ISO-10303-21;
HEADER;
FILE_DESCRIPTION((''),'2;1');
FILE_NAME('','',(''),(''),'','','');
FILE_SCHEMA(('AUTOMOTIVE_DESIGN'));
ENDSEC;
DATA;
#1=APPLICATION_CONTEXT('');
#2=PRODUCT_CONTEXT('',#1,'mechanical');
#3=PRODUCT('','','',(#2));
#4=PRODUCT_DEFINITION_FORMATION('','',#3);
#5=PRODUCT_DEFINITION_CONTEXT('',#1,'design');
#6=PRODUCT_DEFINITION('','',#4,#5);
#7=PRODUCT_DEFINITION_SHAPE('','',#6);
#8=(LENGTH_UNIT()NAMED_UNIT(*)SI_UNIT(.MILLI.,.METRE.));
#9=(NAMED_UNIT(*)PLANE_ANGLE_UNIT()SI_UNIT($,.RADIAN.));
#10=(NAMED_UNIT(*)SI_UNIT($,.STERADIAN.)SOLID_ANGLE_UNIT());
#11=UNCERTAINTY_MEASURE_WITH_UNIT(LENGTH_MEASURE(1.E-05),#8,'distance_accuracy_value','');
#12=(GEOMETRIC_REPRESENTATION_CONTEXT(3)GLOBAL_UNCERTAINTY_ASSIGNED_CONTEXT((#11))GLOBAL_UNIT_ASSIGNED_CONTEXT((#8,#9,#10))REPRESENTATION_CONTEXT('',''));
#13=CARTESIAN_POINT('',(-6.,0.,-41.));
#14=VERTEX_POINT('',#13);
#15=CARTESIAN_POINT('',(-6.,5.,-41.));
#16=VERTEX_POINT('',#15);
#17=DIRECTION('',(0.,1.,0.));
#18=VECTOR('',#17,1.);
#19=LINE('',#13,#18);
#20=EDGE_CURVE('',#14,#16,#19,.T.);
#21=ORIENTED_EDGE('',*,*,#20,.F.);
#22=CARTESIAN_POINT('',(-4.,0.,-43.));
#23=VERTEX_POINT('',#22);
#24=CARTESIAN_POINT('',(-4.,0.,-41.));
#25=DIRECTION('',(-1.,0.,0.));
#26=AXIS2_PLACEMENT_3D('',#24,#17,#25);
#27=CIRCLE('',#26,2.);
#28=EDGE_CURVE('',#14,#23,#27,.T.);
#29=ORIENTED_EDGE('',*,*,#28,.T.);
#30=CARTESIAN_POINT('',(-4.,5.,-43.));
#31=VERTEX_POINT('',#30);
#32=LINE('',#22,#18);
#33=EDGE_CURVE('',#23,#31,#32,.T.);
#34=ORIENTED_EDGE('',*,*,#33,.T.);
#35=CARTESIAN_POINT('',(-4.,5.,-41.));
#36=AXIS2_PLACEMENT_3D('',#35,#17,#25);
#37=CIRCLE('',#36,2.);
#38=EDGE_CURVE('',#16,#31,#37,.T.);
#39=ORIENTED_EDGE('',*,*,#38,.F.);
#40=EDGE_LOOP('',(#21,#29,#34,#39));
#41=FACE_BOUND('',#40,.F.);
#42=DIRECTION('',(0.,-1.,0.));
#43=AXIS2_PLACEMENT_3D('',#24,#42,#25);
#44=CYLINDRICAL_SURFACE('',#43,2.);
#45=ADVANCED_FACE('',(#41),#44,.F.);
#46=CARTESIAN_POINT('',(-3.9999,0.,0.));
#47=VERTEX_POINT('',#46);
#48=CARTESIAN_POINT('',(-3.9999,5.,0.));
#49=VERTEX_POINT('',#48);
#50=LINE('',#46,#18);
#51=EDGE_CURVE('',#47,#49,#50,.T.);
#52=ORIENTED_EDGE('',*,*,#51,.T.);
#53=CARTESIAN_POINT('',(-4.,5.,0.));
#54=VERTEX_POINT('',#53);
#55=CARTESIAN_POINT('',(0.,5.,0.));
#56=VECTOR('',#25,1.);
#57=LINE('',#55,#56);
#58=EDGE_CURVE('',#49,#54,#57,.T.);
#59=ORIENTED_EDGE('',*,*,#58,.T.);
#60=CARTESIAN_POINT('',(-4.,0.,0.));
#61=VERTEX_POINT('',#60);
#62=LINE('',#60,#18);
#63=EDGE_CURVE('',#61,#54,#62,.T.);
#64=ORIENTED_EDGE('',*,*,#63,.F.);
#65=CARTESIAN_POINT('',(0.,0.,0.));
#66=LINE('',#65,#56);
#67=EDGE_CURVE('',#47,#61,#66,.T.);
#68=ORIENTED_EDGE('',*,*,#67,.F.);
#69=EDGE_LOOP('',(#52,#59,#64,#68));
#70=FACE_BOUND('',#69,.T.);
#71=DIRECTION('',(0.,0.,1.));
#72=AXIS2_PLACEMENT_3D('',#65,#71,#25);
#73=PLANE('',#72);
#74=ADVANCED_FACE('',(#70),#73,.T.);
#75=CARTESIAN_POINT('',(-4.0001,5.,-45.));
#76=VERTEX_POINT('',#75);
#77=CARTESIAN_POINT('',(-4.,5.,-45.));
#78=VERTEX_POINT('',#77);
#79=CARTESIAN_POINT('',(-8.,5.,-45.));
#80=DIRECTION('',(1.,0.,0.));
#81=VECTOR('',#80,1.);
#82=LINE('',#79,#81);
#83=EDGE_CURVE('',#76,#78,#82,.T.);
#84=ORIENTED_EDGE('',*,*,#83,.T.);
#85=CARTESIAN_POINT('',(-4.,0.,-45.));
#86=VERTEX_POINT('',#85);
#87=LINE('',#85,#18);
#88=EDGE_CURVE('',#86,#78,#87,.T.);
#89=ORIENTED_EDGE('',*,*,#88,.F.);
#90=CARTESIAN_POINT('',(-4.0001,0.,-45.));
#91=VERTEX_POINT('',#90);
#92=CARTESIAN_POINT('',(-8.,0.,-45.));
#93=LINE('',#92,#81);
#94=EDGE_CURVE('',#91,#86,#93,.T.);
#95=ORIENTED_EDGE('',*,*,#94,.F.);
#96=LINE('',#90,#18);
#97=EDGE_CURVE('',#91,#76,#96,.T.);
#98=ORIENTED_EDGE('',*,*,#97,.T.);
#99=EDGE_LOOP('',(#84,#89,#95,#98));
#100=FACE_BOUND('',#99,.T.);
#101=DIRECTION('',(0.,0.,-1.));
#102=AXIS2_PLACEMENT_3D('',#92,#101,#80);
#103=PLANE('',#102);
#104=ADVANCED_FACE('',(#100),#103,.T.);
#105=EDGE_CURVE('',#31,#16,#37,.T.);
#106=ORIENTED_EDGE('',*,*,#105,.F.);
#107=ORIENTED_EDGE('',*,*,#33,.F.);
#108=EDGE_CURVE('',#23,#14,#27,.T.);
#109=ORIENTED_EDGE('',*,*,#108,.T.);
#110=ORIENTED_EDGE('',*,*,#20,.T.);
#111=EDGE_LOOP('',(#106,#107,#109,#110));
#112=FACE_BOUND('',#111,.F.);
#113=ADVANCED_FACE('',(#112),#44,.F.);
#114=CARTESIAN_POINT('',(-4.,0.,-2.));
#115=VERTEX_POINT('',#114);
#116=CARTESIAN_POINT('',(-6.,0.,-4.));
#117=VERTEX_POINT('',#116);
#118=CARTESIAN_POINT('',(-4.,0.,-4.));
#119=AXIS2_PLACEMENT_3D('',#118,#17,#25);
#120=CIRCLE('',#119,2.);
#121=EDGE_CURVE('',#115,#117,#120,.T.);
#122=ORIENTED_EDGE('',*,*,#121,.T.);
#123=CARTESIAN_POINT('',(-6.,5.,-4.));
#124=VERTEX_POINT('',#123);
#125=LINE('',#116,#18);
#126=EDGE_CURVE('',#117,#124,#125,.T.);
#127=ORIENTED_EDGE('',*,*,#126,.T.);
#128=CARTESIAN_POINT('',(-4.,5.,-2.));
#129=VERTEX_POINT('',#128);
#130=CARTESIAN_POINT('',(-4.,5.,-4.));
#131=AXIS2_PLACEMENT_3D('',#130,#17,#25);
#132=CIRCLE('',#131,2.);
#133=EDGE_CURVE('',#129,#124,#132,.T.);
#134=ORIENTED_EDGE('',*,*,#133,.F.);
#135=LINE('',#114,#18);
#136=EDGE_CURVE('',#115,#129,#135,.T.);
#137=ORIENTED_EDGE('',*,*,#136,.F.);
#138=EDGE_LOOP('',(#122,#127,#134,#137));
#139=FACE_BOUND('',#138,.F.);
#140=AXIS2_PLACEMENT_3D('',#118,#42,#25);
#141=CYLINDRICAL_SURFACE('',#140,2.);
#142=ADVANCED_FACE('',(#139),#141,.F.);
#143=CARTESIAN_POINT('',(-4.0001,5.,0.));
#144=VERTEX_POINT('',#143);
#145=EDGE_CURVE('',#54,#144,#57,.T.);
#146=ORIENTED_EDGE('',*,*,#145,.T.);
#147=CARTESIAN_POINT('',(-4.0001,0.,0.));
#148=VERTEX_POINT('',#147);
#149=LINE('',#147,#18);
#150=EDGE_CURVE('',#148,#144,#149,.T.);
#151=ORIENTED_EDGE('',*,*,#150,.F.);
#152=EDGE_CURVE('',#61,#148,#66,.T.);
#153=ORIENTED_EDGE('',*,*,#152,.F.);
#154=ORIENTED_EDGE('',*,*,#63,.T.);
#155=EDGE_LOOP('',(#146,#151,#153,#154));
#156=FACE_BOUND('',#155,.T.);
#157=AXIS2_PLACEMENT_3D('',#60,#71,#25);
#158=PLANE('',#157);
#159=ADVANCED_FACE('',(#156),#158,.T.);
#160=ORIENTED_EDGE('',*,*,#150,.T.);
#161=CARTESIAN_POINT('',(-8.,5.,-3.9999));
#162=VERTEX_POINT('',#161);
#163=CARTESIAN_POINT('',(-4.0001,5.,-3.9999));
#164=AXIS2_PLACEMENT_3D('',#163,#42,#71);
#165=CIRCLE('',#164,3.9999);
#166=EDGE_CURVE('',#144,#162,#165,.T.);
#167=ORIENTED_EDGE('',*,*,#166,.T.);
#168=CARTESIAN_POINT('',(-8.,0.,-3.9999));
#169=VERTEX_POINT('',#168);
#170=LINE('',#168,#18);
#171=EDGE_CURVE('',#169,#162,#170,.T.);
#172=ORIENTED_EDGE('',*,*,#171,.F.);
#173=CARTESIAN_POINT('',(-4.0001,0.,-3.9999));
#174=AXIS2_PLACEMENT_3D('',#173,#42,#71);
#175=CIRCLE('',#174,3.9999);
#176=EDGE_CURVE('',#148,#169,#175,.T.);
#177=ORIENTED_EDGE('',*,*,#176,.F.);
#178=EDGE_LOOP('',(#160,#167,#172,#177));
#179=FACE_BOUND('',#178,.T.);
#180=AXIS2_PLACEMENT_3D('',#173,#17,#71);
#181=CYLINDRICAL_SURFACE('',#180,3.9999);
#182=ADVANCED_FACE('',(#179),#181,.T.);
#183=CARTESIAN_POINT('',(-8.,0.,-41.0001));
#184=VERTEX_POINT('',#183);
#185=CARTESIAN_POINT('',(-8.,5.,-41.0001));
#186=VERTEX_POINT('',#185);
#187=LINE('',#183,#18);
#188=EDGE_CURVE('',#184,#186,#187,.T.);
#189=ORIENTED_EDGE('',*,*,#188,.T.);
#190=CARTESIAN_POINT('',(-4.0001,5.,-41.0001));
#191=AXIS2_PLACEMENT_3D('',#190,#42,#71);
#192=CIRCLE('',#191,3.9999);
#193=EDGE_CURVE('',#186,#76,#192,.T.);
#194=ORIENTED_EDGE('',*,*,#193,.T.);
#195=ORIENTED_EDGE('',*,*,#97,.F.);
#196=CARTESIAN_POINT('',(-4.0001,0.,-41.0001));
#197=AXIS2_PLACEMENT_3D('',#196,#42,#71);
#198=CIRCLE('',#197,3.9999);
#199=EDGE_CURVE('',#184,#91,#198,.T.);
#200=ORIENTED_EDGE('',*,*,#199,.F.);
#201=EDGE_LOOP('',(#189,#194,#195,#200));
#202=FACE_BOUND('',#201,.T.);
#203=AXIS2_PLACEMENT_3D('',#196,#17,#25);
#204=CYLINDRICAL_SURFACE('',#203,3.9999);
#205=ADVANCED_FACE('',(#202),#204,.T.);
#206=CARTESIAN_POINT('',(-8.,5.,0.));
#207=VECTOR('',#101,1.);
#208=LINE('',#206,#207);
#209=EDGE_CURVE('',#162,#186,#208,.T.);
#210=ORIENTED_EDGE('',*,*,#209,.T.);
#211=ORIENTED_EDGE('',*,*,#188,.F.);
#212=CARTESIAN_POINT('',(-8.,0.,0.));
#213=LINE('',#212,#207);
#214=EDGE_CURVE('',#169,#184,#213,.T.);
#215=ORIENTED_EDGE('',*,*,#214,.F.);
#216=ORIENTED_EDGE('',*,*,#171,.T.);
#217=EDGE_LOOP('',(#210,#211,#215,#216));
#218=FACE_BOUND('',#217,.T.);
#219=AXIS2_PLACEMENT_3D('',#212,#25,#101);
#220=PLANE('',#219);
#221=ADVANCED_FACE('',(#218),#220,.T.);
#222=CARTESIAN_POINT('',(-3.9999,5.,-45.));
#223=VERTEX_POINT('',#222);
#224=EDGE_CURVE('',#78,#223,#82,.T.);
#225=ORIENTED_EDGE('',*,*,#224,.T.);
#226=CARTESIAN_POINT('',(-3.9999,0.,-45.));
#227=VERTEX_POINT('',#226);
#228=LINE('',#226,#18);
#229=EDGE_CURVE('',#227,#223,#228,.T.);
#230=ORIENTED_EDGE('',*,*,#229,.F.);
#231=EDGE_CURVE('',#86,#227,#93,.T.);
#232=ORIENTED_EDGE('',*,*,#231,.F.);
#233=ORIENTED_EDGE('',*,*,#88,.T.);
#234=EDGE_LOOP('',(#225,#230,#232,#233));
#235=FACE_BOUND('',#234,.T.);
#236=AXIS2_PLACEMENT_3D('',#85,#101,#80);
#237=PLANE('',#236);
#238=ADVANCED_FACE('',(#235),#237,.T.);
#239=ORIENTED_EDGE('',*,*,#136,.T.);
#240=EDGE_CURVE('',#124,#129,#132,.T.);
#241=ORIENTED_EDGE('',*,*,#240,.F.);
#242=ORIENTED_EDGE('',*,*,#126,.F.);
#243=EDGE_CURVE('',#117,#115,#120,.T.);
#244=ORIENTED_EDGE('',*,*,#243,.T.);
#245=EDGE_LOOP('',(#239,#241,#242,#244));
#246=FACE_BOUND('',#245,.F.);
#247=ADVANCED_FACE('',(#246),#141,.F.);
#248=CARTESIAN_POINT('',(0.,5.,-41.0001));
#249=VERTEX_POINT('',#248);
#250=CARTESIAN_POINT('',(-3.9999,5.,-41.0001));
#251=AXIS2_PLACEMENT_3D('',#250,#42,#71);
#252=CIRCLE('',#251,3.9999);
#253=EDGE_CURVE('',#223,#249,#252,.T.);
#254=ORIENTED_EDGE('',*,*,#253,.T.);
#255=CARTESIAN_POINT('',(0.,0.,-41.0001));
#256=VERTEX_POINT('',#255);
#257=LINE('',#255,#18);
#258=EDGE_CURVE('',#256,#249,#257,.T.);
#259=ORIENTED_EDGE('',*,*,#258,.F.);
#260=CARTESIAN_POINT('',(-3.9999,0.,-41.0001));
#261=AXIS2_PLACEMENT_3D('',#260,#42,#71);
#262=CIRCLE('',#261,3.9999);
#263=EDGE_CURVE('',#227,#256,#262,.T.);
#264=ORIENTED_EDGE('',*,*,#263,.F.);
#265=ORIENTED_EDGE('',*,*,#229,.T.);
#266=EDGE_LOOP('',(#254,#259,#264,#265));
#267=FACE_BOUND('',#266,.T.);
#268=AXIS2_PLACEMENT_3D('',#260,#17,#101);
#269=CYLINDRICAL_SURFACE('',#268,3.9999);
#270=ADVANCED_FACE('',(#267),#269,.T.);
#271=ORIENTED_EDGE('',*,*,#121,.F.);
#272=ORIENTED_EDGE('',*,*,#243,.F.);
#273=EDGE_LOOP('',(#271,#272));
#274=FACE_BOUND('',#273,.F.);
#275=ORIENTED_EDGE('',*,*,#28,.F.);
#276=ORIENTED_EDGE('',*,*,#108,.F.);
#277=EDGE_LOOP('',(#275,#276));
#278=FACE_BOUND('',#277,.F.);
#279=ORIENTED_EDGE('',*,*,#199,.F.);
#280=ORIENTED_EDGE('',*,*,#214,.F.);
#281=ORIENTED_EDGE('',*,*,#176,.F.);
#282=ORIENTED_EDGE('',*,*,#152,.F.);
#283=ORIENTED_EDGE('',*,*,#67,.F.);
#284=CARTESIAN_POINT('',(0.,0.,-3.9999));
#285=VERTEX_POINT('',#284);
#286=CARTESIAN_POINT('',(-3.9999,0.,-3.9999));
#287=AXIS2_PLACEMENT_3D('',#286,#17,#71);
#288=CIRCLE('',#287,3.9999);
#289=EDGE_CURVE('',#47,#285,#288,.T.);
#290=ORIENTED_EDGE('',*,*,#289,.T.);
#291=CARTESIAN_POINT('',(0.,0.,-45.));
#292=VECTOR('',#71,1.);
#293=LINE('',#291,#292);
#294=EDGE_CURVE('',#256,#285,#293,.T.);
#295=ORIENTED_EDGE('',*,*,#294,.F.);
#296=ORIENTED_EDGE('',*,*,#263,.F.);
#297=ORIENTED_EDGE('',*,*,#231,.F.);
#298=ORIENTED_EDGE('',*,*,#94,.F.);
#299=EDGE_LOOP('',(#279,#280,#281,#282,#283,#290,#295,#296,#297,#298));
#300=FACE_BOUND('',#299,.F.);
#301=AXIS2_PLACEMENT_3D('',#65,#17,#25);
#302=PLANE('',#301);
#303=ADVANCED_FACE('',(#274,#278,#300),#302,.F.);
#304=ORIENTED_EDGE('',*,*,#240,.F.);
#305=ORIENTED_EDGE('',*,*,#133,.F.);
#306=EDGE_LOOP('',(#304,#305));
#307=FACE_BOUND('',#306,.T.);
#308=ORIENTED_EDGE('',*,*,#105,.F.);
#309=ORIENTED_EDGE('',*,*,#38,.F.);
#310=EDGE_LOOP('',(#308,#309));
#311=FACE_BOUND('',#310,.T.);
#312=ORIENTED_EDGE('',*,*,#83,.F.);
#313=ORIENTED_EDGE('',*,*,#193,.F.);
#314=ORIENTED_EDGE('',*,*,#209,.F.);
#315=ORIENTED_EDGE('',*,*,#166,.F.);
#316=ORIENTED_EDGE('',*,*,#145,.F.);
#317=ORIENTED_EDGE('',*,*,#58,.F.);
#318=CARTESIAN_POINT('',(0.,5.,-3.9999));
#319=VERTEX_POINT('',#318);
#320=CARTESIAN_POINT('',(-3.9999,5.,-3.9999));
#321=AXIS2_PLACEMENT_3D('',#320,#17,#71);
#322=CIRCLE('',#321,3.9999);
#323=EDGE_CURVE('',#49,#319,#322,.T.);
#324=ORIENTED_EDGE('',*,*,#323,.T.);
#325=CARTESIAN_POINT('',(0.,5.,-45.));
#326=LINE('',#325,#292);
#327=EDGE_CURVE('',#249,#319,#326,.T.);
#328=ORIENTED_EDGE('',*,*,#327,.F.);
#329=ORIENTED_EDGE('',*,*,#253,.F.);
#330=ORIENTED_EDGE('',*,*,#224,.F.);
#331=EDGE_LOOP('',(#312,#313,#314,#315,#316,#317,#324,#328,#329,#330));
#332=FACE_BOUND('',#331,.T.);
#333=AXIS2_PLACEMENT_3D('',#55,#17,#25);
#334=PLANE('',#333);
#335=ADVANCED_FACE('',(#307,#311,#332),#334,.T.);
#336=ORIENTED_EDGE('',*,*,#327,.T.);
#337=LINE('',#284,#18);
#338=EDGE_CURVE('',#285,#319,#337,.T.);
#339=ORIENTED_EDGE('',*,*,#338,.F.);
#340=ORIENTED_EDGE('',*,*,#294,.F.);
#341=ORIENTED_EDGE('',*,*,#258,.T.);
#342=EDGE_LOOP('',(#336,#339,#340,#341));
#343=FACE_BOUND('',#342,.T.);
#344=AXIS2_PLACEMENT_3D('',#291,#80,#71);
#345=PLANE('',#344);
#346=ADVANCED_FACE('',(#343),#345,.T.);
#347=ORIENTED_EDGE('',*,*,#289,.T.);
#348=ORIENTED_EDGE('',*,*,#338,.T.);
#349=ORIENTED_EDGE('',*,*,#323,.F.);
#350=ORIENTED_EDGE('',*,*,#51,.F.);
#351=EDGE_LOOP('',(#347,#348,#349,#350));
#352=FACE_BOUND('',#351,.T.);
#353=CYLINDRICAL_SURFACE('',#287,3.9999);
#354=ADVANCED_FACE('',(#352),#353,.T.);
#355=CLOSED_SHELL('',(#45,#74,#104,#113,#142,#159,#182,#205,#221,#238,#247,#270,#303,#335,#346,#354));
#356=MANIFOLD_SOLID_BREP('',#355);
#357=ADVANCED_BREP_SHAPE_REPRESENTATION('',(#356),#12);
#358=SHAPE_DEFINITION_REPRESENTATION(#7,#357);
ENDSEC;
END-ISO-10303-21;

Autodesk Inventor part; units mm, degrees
ref_plane "YZ Plane" through (0, 0, 0) normal (1, 0, 0) x (0, 1, 0)
ref_plane "XZ Plane" through (0, 0, 0) normal (0, 1, 0) x (-1, 0, 0)
ref_plane "XY Plane" through (0, 0, 0) normal (0, 0, 1) x (1, 0, 0)
sketch "Sketch1" plane through (0, 0, 0) normal (0, 1, 0) x (-1, 0, 0)
  line L0 (0, 0) -> (8, 0)
  line L1 (8, 0) -> (8, -45)
  line L2 (8, -45) -> (0, -45)
  line L3 (0, -45) -> (0, 0)
  line L4 (8, 0) -> (4, 0)
  line L5 (4, 0) -> (4, -4)
  circle A0 centre (4, -4) radius 2
  line L6 (8, -45) -> (4, -45)
  line L7 (4, -45) -> (4, -41)
  circle A1 centre (4, -41) radius 2
  dimension "d0" = 8
  dimension "d1" = 45
  dimension "d2" = 4
  dimension "d3" = 4
  dimension "d4" = 4
  dimension "d5" = 4
  dimension "d6" = 4
  dimension "d7" = 4
extrude "Extrusion1" add sketch "Sketch1" along normal blind 5
fillet "Fillet1" radius 4 4 edges at (0, 2.5, 0) (-8, 2.5, 0) (-8, 2.5, -45) (0, 2.5, -45)
properties part number "Bar"
